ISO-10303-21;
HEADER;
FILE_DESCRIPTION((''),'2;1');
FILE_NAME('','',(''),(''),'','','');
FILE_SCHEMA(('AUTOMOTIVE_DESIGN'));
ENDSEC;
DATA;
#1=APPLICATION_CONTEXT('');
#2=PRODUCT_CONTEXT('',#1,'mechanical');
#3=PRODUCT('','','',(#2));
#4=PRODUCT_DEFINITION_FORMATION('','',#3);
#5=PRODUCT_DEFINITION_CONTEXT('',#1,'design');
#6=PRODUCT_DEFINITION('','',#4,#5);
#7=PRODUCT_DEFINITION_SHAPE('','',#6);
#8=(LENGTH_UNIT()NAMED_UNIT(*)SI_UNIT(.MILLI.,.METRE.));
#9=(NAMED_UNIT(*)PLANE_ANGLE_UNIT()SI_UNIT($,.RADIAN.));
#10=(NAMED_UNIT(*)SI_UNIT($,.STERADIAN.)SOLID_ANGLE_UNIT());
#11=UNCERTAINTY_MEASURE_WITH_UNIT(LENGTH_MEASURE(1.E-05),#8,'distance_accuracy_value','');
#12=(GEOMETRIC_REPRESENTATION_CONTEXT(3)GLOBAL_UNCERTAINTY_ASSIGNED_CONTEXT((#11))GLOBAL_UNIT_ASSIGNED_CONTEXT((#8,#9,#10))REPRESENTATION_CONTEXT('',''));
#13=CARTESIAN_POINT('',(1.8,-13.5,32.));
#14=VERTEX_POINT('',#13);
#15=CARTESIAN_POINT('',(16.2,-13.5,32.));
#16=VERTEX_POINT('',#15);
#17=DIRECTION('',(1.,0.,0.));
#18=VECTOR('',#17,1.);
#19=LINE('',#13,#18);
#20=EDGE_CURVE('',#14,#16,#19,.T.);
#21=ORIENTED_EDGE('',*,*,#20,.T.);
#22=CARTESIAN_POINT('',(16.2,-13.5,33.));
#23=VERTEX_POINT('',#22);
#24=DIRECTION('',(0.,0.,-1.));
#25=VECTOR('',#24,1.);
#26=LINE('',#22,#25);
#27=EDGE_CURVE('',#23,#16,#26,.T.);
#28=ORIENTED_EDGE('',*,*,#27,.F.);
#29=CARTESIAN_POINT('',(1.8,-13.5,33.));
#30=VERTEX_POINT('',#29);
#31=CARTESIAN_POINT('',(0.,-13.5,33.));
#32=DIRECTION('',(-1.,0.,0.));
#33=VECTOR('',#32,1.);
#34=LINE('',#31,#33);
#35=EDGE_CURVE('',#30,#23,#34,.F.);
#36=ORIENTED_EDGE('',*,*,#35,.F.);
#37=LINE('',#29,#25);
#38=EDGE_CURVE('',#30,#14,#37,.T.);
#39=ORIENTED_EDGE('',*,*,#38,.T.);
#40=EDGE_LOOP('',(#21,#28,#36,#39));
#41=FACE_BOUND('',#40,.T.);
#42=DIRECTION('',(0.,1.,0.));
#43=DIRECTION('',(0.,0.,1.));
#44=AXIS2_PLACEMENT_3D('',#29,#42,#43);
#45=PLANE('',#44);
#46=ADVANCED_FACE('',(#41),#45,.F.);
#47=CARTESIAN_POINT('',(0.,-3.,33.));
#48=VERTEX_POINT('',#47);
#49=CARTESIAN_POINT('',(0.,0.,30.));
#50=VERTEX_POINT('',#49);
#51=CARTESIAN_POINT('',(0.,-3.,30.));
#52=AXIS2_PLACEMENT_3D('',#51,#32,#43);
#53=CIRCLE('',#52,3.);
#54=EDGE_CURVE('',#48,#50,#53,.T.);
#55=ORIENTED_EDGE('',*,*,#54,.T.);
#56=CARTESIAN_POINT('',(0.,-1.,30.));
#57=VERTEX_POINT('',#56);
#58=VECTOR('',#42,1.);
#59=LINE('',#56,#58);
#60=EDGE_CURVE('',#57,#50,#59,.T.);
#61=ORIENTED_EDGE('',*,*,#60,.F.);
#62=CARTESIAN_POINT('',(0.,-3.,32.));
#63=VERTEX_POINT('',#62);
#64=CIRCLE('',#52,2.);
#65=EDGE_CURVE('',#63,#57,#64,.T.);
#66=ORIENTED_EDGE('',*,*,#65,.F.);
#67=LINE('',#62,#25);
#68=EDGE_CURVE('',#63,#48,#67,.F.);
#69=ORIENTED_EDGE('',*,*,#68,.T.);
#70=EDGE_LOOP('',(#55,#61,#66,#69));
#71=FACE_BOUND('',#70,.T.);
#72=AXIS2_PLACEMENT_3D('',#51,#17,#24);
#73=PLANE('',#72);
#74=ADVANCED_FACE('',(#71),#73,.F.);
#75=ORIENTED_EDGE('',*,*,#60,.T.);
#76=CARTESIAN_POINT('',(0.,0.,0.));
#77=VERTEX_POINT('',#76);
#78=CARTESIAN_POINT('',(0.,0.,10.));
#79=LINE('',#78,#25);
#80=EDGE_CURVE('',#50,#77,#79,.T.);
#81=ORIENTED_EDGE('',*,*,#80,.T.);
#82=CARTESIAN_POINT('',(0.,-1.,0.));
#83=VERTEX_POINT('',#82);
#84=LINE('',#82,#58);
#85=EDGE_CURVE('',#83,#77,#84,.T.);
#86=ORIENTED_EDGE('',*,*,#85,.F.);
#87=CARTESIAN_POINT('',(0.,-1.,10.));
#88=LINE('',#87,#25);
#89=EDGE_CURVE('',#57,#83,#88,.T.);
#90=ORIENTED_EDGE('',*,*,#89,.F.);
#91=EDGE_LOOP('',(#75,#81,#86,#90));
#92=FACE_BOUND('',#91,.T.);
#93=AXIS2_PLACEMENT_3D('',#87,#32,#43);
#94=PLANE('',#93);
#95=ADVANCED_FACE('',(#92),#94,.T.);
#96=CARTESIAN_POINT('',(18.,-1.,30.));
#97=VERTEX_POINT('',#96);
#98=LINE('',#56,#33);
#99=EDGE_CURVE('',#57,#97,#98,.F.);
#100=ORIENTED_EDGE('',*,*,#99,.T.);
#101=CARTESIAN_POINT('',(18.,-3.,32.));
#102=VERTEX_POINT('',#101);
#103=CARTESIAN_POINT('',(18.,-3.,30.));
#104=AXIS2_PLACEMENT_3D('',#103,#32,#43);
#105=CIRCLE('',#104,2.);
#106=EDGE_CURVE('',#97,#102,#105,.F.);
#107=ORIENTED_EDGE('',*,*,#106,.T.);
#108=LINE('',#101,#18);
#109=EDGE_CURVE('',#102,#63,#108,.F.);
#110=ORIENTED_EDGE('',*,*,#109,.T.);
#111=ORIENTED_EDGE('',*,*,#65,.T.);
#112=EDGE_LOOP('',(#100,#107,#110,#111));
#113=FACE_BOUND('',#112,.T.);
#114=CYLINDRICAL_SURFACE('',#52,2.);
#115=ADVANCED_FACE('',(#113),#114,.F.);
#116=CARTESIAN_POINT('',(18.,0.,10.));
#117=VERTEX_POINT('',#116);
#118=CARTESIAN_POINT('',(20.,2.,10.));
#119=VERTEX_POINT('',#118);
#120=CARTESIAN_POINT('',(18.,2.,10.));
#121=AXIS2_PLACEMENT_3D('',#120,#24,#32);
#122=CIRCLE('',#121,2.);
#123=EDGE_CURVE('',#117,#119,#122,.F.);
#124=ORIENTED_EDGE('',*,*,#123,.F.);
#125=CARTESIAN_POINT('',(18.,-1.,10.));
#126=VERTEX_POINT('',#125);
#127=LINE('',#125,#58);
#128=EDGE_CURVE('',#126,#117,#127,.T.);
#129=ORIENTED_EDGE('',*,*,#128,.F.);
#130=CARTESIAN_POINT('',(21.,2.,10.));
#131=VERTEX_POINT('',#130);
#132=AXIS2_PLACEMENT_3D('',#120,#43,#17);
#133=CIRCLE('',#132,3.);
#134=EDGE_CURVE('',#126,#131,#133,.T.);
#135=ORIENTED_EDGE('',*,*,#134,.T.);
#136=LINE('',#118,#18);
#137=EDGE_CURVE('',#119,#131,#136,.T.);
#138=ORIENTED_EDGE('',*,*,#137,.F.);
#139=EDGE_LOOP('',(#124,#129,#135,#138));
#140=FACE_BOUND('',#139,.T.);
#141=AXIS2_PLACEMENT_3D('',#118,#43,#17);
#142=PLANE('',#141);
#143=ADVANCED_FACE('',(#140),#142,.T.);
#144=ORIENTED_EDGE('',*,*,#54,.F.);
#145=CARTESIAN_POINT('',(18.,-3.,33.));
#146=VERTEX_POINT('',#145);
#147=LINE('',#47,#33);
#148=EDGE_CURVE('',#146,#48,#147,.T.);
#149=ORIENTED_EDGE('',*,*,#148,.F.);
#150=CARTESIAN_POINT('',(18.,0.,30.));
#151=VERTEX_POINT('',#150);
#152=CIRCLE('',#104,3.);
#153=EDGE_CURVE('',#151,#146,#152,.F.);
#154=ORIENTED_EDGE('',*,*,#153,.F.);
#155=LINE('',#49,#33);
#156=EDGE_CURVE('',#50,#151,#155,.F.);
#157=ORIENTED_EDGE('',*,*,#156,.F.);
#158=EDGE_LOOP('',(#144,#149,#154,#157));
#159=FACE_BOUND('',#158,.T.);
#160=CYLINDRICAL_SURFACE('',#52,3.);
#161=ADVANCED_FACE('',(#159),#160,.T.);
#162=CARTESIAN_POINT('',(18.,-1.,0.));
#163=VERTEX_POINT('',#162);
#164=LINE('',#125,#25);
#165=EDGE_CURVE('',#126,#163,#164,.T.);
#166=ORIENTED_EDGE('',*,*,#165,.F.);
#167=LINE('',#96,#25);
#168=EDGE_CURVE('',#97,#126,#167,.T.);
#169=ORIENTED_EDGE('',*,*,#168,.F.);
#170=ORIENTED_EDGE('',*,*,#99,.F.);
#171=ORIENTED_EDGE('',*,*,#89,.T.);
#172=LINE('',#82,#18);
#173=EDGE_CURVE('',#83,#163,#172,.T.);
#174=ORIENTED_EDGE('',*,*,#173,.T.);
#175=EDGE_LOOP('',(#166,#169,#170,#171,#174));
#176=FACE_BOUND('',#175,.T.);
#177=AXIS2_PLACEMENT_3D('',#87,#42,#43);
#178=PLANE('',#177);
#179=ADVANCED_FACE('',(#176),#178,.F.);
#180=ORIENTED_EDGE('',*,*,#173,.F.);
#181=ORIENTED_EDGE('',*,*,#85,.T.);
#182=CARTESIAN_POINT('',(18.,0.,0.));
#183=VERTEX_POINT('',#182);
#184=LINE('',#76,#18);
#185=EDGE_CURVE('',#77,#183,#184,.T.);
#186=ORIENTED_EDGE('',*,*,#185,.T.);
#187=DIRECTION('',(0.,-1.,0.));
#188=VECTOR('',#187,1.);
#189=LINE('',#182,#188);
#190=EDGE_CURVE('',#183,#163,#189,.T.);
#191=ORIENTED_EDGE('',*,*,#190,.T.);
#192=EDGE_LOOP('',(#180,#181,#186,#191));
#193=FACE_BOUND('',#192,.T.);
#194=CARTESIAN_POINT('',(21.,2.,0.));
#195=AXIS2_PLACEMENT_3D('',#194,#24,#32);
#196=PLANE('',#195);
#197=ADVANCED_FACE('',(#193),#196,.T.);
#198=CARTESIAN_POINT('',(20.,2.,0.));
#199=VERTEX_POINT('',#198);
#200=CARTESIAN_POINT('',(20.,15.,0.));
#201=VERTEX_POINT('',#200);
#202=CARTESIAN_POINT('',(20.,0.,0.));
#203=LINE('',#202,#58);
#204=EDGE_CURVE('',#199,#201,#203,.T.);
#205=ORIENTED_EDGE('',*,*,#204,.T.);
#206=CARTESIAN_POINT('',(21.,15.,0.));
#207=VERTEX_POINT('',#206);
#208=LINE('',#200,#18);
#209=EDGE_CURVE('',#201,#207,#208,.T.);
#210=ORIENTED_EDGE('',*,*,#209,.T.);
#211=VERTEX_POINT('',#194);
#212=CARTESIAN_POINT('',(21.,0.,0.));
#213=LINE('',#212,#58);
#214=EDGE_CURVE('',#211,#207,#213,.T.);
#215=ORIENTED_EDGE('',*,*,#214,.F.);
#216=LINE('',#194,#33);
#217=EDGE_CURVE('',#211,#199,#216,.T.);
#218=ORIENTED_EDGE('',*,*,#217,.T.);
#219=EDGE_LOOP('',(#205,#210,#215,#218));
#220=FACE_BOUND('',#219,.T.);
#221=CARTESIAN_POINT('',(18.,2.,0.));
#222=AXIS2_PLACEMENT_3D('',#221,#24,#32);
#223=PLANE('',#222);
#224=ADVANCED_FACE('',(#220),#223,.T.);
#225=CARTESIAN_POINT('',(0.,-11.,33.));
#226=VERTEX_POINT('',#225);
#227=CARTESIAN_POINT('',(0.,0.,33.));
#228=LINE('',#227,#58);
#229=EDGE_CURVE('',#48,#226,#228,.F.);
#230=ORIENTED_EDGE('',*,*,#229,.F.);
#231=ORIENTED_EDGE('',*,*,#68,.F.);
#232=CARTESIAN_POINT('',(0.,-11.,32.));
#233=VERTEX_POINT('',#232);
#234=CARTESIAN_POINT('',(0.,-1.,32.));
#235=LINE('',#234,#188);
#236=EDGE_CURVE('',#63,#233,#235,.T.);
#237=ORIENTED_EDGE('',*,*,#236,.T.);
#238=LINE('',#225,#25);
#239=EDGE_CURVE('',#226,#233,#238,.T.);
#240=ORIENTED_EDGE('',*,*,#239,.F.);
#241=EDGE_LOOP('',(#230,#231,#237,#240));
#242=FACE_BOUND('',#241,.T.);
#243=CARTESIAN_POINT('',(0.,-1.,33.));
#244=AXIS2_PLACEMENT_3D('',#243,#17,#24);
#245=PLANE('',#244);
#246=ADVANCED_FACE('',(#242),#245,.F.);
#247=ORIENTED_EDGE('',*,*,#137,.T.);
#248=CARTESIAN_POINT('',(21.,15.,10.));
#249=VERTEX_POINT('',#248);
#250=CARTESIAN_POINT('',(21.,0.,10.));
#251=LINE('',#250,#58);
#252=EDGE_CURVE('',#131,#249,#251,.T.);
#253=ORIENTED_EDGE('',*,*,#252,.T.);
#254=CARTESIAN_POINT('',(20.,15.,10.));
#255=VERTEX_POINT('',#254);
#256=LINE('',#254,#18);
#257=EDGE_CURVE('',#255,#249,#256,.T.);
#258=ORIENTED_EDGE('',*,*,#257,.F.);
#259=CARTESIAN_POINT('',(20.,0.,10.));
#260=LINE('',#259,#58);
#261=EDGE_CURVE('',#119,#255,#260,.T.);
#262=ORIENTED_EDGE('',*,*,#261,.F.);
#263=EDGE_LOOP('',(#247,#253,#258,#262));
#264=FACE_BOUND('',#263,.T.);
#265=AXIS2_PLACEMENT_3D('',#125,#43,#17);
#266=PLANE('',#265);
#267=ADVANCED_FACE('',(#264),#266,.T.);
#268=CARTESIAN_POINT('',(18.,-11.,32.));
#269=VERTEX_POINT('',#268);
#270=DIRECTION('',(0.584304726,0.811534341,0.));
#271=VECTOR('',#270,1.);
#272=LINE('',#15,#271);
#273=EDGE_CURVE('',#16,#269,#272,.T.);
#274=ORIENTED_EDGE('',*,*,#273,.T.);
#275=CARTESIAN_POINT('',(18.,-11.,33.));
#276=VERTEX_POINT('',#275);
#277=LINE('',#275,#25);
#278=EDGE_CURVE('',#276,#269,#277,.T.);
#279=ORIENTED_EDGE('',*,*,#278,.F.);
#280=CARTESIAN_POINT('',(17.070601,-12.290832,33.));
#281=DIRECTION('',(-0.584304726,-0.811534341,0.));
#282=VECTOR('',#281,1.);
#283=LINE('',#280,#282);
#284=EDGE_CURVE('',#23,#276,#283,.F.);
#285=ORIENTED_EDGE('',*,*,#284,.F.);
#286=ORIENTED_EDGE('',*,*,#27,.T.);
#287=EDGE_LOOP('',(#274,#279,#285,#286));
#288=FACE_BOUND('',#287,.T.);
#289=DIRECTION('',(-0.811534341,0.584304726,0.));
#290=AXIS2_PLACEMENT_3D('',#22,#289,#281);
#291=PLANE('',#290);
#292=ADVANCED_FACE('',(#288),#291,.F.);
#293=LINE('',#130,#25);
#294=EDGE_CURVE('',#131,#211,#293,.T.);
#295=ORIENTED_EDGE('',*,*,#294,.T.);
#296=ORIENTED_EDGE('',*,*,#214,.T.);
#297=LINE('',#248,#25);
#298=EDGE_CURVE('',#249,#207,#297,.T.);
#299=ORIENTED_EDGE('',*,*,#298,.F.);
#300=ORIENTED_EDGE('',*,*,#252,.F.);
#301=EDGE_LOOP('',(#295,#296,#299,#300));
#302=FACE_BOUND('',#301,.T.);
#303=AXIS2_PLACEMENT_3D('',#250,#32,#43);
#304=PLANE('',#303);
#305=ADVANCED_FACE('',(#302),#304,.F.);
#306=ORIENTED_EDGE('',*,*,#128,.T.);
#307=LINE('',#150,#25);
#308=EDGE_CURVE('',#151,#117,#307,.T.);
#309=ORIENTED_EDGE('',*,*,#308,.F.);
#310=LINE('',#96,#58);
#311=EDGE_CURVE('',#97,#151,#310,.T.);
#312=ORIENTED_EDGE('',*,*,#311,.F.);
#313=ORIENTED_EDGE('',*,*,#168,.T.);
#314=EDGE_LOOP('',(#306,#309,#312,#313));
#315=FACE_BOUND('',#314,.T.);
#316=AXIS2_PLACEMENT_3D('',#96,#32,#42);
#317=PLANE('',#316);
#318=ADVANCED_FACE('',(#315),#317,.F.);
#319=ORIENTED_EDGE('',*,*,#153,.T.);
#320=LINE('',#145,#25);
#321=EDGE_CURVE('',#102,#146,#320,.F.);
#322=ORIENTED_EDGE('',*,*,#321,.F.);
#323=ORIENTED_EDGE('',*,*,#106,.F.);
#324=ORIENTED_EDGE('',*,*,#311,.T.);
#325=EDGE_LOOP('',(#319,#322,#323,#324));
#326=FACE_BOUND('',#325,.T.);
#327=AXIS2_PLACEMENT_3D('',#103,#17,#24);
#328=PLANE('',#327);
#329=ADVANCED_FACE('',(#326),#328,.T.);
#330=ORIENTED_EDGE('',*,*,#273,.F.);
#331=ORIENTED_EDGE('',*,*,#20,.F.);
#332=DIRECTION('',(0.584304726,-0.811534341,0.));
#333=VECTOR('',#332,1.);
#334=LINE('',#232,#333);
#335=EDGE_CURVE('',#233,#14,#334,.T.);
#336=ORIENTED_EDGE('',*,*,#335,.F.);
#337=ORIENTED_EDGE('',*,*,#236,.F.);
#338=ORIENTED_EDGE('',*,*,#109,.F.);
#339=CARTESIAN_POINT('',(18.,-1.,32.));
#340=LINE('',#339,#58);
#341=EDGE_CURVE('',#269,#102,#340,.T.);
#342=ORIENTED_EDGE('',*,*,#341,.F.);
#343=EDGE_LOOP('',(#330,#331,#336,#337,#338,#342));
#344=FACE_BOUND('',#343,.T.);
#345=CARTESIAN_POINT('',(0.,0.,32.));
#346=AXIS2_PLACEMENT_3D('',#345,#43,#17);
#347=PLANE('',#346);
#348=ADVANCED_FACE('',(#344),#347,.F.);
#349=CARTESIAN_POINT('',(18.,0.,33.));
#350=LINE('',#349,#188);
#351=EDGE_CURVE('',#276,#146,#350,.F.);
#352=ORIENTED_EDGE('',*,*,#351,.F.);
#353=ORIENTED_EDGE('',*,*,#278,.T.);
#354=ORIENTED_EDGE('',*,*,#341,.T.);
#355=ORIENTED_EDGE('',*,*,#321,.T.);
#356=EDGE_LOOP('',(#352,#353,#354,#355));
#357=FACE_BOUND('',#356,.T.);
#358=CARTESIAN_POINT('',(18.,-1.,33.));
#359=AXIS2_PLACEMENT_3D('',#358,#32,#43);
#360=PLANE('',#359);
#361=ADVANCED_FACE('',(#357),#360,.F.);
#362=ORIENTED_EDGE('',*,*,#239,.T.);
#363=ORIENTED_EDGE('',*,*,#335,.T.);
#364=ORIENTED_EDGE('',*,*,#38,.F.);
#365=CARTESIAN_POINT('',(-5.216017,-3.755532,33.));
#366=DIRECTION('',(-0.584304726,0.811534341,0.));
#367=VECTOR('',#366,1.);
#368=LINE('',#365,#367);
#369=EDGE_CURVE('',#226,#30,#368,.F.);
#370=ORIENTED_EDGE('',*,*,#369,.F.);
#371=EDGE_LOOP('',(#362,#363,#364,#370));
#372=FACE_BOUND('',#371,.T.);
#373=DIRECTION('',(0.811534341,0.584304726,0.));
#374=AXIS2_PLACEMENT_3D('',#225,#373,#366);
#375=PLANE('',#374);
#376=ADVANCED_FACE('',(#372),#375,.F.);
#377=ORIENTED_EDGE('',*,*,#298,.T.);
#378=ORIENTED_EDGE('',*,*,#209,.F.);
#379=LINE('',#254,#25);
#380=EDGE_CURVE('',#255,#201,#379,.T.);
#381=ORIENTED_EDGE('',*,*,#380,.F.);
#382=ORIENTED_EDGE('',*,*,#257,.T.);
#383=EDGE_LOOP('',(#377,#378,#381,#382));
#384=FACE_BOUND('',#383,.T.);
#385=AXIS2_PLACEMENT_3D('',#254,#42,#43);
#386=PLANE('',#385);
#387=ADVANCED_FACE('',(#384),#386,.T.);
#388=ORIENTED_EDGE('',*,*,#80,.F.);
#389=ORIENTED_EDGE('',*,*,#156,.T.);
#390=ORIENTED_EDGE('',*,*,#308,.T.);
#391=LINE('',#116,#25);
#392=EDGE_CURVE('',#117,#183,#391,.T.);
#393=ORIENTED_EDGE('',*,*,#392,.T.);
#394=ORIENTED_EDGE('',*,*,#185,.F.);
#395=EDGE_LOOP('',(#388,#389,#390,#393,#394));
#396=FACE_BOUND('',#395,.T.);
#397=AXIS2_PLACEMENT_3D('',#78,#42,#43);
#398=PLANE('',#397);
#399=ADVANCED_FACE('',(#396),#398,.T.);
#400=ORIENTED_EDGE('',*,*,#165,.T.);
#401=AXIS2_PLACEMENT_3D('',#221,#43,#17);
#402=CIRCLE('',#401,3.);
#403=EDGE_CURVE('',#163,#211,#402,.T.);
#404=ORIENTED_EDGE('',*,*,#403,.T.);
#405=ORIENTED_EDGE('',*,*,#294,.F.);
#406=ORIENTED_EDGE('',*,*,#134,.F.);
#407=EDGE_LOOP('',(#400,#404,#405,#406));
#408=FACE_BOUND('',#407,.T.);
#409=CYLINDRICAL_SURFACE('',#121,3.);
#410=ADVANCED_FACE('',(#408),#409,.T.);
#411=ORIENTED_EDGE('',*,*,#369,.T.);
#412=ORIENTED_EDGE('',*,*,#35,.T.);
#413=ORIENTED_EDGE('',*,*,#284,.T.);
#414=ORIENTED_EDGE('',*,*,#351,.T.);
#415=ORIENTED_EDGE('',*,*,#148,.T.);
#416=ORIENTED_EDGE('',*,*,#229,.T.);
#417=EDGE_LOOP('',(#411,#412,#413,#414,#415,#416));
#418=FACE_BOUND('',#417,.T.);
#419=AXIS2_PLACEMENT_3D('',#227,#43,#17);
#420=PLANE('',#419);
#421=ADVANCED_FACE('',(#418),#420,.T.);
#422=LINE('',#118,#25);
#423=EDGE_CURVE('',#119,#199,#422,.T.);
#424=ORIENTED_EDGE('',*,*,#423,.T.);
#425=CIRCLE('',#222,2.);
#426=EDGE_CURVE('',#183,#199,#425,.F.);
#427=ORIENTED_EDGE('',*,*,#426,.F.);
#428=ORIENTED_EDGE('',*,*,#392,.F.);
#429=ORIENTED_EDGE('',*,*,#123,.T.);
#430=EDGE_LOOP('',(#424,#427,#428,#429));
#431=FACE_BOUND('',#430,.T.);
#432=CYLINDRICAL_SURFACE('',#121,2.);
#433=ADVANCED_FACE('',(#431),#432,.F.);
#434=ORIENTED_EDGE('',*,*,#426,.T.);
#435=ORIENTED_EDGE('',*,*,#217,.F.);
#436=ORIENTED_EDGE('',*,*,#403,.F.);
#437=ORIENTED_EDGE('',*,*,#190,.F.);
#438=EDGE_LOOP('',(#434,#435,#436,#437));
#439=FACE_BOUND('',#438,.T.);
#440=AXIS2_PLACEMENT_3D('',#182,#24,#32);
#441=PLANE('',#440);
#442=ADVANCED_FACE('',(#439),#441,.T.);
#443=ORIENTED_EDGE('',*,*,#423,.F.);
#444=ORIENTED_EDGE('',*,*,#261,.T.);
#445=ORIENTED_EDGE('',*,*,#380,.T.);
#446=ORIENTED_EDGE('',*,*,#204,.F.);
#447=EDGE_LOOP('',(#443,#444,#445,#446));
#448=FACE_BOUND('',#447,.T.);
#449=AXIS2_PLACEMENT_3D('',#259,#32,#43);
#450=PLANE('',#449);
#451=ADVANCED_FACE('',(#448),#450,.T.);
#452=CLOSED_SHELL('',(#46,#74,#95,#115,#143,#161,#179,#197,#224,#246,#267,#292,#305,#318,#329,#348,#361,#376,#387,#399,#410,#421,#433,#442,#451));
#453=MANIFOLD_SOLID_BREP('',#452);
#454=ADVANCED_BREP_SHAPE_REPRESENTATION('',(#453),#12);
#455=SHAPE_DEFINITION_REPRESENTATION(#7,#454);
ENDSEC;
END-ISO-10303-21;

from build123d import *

# Parameters (mm, degrees)
SM_BASE_FLANGE_1_DEPTH      = 10
SM_EDGE_FLANGE_2_DEPTH      = 18
SM_START                    = 1
SM_EDGE_FLANGE_2_FLAT_DEPTH = 1


# Sheet-metal steps are written as plain solids
with BuildPart() as part:
    # Sketch 1 → 基体-法兰1 (new body)
    with BuildSketch(Plane.XY):
        with BuildLine():
            Line((0, 0), (18, 0))
            ThreePointArc((18, 0), (19.414213562, 0.585786438), (20, 2))
            Line((20, 2), (20, 15))
            Line((20, 15), (21, 15))
            Line((21, 15), (21, 2))
            ThreePointArc((21, 2), (20.121320344, -0.121320344), (18, -1))
            Line((18, -1), (0, -1))
            Line((0, -1), (0, 0))
        make_face()
    extrude(amount=SM_BASE_FLANGE_1_DEPTH)

    # 边线-法兰2 bend section (across the edge) → 边线-法兰2 (add)
    with BuildSketch(Plane(origin=(18, -1, 32), x_dir=(0, 0, -1), z_dir=(-1, 0, 0))):
        with BuildLine():
            Line((-1, 2), (0, 2))
            ThreePointArc((0, 2), (0.585786438, 0.585786438), (2, 0))
            Line((2, 0), (22, 0))
            Line((22, 0), (22, -1))
            Line((22, -1), (2, -1))
            ThreePointArc((2, -1), (-0.121320344, -0.121320344), (-1, 2))
        make_face()
    extrude(amount=SM_EDGE_FLANGE_2_DEPTH)

    # 边线-法兰2 profile (on flange) → 边线-法兰2 flat (add)
    with BuildSketch(Plane(origin=(0, -1, 32), x_dir=(-1, 0, 0), z_dir=(0, 0, 1)).offset(SM_START)):
        Polygon((0, 2), (0, 10), (-1.8, 12.5), (-16.2, 12.5), (-18, 10), (-18, 2), align=None)
    extrude(amount=-SM_EDGE_FLANGE_2_FLAT_DEPTH)


solid = part.part
